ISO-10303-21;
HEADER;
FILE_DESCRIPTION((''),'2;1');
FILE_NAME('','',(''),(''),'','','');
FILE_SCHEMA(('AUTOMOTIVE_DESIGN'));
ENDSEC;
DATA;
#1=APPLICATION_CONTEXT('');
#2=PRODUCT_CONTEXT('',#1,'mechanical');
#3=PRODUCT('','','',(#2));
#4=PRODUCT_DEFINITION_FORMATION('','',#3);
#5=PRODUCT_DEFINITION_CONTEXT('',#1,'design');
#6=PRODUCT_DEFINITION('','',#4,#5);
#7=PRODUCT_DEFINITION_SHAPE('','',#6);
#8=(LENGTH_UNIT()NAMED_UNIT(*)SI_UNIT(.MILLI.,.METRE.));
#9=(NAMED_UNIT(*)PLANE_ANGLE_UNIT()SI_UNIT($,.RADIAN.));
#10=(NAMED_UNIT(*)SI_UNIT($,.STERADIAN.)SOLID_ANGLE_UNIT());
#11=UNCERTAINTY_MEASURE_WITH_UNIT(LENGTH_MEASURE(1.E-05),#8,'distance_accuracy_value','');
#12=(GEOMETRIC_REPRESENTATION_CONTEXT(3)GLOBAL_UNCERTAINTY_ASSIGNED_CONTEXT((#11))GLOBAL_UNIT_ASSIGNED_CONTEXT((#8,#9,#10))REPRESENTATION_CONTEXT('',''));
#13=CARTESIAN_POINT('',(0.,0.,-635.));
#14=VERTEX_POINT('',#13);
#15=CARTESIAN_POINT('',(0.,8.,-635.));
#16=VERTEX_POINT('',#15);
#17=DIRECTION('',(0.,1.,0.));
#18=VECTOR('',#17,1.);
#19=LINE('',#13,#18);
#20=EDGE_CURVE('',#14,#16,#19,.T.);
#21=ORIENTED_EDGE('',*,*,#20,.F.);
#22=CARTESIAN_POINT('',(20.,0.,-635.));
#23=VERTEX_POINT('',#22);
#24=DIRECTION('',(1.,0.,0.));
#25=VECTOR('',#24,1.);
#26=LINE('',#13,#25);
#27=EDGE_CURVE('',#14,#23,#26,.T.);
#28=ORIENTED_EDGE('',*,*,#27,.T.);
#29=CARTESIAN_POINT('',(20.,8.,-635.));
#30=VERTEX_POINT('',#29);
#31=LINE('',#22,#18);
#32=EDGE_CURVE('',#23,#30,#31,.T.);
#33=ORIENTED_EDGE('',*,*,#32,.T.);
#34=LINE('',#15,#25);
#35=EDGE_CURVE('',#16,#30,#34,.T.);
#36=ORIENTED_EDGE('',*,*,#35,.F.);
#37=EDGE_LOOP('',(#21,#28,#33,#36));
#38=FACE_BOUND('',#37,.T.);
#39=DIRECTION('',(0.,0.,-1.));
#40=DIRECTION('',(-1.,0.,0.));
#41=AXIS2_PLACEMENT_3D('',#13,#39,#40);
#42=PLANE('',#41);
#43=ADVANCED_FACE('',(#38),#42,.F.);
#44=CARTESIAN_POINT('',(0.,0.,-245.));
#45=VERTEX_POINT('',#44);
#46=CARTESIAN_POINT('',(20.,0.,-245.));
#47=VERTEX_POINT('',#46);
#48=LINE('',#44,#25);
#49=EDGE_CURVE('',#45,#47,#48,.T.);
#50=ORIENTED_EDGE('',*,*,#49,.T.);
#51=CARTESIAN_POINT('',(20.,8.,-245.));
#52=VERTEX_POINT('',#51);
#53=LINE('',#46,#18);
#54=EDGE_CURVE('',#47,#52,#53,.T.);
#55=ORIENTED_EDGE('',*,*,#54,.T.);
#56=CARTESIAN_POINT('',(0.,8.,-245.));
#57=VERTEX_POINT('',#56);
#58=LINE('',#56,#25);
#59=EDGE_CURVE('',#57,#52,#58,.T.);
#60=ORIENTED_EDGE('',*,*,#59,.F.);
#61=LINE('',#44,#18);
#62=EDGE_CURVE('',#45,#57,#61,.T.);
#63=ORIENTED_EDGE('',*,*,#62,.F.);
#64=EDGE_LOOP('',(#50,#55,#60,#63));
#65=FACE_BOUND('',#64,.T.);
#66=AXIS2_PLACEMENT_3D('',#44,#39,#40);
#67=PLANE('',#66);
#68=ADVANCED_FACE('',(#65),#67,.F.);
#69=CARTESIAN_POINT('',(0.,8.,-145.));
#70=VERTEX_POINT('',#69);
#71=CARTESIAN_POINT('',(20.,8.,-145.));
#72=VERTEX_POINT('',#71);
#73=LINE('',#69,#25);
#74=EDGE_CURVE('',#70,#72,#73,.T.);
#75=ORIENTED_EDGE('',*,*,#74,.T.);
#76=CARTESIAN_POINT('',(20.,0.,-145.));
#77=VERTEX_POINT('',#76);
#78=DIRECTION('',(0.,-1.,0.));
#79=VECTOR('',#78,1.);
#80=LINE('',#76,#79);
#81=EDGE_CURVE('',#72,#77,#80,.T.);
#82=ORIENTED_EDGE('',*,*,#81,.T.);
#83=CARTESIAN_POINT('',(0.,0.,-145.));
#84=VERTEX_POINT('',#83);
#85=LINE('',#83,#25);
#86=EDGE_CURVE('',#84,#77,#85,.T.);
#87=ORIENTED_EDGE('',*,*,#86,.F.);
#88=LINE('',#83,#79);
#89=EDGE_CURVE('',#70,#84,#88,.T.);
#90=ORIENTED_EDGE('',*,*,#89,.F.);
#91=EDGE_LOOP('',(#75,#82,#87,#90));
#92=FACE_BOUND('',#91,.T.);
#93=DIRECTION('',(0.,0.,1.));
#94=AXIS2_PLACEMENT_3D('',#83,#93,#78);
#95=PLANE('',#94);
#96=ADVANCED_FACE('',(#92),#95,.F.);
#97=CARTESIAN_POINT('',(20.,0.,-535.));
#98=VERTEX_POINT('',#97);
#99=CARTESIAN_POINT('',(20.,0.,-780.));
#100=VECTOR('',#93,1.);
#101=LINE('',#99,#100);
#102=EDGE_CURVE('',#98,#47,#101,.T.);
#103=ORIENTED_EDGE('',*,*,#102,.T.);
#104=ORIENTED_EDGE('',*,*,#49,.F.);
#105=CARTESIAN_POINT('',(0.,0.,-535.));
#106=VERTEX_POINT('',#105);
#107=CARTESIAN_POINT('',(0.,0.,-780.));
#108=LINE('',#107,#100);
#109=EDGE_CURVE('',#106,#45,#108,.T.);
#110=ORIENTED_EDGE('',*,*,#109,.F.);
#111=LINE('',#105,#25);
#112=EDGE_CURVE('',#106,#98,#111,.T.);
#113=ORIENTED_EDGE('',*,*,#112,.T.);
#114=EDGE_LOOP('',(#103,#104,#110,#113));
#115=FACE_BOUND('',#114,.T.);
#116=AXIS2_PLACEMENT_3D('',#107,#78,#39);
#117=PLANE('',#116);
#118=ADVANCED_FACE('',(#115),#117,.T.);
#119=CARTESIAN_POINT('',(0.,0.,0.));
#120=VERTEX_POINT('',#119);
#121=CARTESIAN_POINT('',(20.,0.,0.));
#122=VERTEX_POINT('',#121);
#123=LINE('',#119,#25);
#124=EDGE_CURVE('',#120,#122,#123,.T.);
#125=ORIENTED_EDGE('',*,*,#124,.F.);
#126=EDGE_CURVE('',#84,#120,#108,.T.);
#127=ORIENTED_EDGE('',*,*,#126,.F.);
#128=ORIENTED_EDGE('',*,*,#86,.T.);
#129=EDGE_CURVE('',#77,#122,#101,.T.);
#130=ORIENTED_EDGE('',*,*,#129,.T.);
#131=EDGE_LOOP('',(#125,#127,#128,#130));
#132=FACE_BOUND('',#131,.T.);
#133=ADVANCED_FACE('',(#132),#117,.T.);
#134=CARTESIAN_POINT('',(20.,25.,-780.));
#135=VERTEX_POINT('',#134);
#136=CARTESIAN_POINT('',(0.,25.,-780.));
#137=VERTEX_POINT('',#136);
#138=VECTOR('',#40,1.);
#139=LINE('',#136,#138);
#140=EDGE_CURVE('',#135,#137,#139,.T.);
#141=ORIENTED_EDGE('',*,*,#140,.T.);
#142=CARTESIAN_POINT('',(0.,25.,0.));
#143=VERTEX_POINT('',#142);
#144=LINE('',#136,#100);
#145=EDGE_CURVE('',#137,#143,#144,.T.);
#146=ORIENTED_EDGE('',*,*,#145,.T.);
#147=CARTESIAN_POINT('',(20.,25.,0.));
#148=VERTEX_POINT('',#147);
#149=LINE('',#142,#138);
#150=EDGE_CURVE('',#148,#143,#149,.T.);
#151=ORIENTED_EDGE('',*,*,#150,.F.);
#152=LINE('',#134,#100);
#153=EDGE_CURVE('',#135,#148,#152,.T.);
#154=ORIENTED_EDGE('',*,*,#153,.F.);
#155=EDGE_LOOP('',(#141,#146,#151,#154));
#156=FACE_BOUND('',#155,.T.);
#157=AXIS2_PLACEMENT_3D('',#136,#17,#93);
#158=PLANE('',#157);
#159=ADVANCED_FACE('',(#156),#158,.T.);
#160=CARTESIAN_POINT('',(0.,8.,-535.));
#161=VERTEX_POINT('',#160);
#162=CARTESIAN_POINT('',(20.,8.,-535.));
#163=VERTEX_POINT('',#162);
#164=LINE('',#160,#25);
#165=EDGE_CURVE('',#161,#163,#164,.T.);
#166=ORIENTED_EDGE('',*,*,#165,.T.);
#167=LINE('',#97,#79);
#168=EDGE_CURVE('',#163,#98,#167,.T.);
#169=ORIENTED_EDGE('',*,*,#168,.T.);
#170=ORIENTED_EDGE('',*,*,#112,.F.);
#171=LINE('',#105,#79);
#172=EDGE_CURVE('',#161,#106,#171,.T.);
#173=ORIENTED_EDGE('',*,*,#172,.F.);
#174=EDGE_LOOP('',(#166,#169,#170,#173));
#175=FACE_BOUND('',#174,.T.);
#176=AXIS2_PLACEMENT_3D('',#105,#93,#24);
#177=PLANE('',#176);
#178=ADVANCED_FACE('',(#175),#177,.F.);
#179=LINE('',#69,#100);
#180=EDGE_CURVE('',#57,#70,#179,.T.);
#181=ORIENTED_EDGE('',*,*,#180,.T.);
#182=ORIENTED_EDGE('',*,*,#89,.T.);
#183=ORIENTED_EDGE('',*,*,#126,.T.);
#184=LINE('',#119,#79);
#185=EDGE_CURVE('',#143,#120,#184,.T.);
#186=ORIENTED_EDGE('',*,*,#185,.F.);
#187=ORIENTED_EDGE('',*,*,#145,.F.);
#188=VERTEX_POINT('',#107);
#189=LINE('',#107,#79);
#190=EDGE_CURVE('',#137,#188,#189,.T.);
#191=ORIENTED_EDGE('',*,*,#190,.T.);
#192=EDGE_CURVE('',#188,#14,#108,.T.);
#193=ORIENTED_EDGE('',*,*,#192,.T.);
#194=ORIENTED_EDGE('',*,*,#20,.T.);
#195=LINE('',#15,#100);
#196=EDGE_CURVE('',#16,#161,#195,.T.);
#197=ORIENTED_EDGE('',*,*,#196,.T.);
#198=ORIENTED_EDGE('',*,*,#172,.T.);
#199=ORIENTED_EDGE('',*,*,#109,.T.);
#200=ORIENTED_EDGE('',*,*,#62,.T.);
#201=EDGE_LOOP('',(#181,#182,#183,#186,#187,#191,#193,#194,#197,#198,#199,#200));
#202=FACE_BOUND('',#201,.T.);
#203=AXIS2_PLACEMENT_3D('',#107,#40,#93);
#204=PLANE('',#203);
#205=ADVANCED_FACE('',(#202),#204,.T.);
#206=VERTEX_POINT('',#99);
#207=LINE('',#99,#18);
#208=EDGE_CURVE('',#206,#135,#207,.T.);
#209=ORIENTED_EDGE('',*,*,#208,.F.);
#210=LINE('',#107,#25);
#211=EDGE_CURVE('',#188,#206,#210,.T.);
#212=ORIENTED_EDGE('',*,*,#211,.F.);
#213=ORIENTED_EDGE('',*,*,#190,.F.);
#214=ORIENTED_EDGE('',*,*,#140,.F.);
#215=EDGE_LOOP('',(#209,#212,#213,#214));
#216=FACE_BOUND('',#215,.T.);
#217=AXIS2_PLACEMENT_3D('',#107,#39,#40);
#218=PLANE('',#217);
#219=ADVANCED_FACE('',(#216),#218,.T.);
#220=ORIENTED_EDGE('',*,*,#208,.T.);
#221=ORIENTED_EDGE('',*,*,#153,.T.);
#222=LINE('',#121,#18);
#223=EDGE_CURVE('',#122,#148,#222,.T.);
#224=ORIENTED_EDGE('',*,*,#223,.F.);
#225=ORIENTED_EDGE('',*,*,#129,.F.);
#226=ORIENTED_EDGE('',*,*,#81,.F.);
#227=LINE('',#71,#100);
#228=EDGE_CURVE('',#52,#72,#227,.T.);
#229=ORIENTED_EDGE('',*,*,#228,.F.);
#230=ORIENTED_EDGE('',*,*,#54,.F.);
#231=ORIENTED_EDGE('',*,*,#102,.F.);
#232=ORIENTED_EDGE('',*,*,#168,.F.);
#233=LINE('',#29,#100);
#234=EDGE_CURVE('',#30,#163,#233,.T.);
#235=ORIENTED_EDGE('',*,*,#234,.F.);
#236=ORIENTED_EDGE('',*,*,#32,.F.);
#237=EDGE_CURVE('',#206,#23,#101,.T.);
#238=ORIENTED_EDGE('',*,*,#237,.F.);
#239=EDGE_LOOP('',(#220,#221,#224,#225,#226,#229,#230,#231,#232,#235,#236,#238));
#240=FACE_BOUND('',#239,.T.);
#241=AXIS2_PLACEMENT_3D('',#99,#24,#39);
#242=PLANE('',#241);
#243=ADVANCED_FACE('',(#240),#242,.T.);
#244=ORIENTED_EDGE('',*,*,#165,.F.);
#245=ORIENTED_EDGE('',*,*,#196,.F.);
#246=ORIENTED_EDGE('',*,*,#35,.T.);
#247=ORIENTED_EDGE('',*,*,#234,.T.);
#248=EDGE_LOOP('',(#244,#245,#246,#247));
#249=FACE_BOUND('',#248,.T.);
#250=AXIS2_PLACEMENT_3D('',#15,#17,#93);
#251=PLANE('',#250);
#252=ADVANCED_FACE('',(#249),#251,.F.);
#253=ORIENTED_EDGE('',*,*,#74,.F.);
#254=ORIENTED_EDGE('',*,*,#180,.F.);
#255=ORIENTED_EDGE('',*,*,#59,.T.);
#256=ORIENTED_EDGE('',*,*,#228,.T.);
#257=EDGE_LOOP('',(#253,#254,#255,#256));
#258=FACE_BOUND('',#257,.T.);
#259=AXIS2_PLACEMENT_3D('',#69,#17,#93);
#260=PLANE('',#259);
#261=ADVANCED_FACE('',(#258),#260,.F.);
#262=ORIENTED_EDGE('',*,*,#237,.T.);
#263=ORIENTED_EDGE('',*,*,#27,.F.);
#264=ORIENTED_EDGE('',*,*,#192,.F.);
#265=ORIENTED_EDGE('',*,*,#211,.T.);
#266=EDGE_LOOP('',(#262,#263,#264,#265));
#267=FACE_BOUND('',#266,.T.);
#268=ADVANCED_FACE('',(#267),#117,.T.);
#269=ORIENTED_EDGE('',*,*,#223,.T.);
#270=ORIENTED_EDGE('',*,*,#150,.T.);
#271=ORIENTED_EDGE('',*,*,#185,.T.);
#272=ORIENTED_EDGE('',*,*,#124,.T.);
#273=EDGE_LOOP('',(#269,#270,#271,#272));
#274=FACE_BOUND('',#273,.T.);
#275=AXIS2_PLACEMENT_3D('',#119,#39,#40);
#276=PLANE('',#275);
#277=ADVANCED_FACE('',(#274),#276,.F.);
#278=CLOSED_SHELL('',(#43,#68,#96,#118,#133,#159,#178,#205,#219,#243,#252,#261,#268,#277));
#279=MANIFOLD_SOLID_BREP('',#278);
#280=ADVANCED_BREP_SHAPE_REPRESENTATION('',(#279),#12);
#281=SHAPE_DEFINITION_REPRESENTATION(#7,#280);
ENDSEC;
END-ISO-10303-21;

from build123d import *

# Parameters (mm, degrees)
EXTRUDE_1_OUTLINE_W = 25
EXTRUDE_1_OUTLINE_H = 780
EXTRUDE_1_DEPTH     = 20
SKETCH_2_W          = 100
SKETCH_2_H          = 8
CUT_EXTRUDE_1_DEPTH = 781.656774774


# Read off the part's stored shape, not the designer's step: Бобышка-Вытянуть1
with BuildPart() as part:
    # Бобышка-Вытянуть1 outline → Бобышка-Вытянуть1 (new body)
    with BuildSketch(Plane.YZ):
        with Locations((12.5, -390)):
            Rectangle(EXTRUDE_1_OUTLINE_W, EXTRUDE_1_OUTLINE_H)
    extrude(amount=EXTRUDE_1_DEPTH)

    # Эскиз2 → Вырез-Вытянуть1 (cut, through all)
    with BuildSketch(Plane(origin=(20, 0, 0), x_dir=(0, 0, -1), z_dir=(1, 0, 0))):
        with Locations((195, 4)):
            Rectangle(SKETCH_2_W, SKETCH_2_H)
        with Locations((585, 4)):
            Rectangle(SKETCH_2_W, SKETCH_2_H)
    extrude(amount=-CUT_EXTRUDE_1_DEPTH, mode=Mode.SUBTRACT)


solid = part.part
